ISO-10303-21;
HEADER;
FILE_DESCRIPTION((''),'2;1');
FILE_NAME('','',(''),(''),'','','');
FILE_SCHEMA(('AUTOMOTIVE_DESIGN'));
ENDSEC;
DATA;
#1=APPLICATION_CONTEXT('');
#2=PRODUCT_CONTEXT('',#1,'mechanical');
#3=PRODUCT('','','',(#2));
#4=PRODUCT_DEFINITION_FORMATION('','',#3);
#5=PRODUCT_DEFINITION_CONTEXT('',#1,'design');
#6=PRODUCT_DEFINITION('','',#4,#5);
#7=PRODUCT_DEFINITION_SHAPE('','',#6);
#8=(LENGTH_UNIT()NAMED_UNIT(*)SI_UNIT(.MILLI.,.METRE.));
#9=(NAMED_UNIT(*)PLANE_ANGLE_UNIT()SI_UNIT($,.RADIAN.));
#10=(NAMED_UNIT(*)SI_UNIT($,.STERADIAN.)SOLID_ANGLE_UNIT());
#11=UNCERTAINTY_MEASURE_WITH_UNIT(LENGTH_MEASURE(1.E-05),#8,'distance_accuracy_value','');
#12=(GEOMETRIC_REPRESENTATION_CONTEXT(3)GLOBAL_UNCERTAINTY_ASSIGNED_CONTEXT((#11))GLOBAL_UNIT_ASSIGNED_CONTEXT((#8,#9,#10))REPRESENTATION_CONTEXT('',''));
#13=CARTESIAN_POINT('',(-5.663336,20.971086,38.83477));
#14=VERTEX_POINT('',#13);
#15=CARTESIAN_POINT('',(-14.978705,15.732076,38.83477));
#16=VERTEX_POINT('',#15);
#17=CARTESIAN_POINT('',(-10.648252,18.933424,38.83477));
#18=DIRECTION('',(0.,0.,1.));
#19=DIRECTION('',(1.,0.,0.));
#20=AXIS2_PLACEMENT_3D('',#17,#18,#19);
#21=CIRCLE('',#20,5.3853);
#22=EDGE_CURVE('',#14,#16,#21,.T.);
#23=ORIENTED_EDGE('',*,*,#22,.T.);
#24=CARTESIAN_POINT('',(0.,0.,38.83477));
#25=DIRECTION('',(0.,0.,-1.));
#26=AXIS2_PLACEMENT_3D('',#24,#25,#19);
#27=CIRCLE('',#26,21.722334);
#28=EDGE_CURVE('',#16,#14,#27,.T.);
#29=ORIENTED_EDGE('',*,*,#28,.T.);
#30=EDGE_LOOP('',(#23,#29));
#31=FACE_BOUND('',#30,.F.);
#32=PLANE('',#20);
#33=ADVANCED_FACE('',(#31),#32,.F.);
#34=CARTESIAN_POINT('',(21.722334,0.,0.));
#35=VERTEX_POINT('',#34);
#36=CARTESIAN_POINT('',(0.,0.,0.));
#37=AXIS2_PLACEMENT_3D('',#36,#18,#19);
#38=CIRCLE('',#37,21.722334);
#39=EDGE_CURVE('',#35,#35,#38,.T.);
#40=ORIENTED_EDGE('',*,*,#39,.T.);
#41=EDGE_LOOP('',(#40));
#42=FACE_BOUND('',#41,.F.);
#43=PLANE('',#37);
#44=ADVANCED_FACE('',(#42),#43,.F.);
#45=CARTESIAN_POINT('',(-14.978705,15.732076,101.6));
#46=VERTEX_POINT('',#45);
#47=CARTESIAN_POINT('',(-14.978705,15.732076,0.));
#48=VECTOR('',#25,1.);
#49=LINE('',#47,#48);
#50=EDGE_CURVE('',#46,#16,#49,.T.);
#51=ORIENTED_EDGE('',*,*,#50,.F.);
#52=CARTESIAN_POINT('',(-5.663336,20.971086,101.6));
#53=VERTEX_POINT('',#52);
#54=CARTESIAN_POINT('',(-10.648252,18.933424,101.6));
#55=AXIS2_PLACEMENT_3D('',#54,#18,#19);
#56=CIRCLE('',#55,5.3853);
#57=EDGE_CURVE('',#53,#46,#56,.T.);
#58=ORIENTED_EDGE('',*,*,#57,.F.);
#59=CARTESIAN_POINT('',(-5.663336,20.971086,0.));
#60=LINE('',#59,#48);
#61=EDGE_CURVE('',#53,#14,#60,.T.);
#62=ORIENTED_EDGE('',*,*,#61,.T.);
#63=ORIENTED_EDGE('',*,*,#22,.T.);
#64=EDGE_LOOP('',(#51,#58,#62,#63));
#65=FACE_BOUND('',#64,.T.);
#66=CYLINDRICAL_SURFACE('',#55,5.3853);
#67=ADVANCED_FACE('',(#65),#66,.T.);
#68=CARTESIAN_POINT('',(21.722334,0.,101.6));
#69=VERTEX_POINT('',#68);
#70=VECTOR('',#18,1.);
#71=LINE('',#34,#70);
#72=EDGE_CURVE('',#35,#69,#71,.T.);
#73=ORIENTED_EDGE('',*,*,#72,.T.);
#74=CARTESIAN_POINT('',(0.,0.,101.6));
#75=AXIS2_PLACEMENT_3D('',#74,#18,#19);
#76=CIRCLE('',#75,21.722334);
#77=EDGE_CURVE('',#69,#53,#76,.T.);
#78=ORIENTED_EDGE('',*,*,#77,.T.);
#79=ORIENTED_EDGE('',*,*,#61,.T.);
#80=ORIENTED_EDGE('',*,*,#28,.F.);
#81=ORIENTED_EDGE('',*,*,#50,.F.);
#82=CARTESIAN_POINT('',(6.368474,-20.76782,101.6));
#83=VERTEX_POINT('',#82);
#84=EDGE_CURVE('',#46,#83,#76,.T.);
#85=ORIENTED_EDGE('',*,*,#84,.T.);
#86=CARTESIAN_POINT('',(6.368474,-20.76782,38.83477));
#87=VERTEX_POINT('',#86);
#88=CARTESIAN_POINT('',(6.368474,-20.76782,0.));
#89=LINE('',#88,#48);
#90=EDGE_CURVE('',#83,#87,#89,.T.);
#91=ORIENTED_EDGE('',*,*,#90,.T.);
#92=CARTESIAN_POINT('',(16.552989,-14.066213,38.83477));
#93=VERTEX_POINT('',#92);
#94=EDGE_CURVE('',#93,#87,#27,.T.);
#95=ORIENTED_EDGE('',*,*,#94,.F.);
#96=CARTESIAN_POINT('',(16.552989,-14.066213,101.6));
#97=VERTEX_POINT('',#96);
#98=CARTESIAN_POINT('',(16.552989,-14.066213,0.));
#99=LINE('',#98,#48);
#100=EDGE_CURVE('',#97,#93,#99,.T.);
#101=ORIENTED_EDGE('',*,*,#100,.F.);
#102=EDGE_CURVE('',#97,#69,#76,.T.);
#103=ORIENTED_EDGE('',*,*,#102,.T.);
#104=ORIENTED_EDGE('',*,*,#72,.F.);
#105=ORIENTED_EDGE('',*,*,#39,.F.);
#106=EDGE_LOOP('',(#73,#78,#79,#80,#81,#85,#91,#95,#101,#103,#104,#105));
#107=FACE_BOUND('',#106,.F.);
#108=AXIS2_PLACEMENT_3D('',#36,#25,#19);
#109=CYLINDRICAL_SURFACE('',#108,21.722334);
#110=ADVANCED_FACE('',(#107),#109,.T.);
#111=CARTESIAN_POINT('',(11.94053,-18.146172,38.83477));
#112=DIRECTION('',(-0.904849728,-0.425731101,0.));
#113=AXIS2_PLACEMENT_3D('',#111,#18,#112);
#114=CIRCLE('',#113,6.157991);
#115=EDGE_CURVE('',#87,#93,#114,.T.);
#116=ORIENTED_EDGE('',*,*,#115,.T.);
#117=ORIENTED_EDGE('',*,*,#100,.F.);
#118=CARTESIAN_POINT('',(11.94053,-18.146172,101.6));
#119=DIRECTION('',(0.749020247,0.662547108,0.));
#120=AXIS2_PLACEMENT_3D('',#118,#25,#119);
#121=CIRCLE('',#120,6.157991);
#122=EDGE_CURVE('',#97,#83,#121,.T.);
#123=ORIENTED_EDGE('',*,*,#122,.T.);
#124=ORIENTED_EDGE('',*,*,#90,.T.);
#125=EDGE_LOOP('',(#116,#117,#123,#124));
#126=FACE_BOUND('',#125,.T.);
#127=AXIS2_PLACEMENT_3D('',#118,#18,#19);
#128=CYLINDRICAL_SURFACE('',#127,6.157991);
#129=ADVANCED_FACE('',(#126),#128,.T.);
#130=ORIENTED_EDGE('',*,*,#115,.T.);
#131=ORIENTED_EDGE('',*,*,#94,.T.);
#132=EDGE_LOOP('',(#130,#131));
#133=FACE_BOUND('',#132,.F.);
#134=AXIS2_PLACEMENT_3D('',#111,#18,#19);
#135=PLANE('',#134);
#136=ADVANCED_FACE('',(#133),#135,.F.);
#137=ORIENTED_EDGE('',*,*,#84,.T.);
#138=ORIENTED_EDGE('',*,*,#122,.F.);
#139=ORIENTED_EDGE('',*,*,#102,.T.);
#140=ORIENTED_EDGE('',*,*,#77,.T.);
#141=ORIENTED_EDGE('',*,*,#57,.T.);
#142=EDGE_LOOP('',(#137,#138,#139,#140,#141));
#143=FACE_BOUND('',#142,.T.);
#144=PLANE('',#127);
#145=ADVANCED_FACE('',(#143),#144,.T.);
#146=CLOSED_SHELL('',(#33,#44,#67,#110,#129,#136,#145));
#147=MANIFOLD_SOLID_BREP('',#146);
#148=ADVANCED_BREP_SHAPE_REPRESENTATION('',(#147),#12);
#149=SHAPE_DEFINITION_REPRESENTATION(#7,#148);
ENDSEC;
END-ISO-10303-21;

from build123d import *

# Parameters (mm, degrees)
F1_R     = 21.7223344902
F2_DEPTH = 101.6
F4_DEPTH = 99.02421
F3_R     = 6.1579906
F3_R_2   = 5.385299851
F5_DEPTH = 62.76523


# Not quite as in the source:
# - a feature names something its author has since deleted; it is built from what else it names


with BuildPart() as f2:
    # F1 (on Top) → F2 (new body)
    with BuildSketch(Plane.XY):
        Circle(F1_R)
    extrude(amount=F2_DEPTH)

    # F3 (on face) → F4 (join)
    with BuildSketch(Plane.XY.offset(101.6)):
        with BuildLine():
            ThreePointArc((6.3684736853, -20.7678202666), (11.9405298036, -18.1461721505), (16.5529894413, -14.0662132879))
            ThreePointArc((16.5529894413, -14.0662132879), (8.5555496891, -13.0019756287), (6.3684736853, -20.7678202666))
        make_face()
    extrude(amount=-F4_DEPTH)

    # F3 (on face) → F5 (join)
    with BuildSketch(Plane.XY.offset(101.6)):
        with Locations((11.9405298036, -18.1461721505)):
            Circle(F3_R)
        with Locations((-10.6482523042, 18.933423847)):
            Circle(F3_R_2)
    extrude(amount=-F5_DEPTH)


solid = f2.part
